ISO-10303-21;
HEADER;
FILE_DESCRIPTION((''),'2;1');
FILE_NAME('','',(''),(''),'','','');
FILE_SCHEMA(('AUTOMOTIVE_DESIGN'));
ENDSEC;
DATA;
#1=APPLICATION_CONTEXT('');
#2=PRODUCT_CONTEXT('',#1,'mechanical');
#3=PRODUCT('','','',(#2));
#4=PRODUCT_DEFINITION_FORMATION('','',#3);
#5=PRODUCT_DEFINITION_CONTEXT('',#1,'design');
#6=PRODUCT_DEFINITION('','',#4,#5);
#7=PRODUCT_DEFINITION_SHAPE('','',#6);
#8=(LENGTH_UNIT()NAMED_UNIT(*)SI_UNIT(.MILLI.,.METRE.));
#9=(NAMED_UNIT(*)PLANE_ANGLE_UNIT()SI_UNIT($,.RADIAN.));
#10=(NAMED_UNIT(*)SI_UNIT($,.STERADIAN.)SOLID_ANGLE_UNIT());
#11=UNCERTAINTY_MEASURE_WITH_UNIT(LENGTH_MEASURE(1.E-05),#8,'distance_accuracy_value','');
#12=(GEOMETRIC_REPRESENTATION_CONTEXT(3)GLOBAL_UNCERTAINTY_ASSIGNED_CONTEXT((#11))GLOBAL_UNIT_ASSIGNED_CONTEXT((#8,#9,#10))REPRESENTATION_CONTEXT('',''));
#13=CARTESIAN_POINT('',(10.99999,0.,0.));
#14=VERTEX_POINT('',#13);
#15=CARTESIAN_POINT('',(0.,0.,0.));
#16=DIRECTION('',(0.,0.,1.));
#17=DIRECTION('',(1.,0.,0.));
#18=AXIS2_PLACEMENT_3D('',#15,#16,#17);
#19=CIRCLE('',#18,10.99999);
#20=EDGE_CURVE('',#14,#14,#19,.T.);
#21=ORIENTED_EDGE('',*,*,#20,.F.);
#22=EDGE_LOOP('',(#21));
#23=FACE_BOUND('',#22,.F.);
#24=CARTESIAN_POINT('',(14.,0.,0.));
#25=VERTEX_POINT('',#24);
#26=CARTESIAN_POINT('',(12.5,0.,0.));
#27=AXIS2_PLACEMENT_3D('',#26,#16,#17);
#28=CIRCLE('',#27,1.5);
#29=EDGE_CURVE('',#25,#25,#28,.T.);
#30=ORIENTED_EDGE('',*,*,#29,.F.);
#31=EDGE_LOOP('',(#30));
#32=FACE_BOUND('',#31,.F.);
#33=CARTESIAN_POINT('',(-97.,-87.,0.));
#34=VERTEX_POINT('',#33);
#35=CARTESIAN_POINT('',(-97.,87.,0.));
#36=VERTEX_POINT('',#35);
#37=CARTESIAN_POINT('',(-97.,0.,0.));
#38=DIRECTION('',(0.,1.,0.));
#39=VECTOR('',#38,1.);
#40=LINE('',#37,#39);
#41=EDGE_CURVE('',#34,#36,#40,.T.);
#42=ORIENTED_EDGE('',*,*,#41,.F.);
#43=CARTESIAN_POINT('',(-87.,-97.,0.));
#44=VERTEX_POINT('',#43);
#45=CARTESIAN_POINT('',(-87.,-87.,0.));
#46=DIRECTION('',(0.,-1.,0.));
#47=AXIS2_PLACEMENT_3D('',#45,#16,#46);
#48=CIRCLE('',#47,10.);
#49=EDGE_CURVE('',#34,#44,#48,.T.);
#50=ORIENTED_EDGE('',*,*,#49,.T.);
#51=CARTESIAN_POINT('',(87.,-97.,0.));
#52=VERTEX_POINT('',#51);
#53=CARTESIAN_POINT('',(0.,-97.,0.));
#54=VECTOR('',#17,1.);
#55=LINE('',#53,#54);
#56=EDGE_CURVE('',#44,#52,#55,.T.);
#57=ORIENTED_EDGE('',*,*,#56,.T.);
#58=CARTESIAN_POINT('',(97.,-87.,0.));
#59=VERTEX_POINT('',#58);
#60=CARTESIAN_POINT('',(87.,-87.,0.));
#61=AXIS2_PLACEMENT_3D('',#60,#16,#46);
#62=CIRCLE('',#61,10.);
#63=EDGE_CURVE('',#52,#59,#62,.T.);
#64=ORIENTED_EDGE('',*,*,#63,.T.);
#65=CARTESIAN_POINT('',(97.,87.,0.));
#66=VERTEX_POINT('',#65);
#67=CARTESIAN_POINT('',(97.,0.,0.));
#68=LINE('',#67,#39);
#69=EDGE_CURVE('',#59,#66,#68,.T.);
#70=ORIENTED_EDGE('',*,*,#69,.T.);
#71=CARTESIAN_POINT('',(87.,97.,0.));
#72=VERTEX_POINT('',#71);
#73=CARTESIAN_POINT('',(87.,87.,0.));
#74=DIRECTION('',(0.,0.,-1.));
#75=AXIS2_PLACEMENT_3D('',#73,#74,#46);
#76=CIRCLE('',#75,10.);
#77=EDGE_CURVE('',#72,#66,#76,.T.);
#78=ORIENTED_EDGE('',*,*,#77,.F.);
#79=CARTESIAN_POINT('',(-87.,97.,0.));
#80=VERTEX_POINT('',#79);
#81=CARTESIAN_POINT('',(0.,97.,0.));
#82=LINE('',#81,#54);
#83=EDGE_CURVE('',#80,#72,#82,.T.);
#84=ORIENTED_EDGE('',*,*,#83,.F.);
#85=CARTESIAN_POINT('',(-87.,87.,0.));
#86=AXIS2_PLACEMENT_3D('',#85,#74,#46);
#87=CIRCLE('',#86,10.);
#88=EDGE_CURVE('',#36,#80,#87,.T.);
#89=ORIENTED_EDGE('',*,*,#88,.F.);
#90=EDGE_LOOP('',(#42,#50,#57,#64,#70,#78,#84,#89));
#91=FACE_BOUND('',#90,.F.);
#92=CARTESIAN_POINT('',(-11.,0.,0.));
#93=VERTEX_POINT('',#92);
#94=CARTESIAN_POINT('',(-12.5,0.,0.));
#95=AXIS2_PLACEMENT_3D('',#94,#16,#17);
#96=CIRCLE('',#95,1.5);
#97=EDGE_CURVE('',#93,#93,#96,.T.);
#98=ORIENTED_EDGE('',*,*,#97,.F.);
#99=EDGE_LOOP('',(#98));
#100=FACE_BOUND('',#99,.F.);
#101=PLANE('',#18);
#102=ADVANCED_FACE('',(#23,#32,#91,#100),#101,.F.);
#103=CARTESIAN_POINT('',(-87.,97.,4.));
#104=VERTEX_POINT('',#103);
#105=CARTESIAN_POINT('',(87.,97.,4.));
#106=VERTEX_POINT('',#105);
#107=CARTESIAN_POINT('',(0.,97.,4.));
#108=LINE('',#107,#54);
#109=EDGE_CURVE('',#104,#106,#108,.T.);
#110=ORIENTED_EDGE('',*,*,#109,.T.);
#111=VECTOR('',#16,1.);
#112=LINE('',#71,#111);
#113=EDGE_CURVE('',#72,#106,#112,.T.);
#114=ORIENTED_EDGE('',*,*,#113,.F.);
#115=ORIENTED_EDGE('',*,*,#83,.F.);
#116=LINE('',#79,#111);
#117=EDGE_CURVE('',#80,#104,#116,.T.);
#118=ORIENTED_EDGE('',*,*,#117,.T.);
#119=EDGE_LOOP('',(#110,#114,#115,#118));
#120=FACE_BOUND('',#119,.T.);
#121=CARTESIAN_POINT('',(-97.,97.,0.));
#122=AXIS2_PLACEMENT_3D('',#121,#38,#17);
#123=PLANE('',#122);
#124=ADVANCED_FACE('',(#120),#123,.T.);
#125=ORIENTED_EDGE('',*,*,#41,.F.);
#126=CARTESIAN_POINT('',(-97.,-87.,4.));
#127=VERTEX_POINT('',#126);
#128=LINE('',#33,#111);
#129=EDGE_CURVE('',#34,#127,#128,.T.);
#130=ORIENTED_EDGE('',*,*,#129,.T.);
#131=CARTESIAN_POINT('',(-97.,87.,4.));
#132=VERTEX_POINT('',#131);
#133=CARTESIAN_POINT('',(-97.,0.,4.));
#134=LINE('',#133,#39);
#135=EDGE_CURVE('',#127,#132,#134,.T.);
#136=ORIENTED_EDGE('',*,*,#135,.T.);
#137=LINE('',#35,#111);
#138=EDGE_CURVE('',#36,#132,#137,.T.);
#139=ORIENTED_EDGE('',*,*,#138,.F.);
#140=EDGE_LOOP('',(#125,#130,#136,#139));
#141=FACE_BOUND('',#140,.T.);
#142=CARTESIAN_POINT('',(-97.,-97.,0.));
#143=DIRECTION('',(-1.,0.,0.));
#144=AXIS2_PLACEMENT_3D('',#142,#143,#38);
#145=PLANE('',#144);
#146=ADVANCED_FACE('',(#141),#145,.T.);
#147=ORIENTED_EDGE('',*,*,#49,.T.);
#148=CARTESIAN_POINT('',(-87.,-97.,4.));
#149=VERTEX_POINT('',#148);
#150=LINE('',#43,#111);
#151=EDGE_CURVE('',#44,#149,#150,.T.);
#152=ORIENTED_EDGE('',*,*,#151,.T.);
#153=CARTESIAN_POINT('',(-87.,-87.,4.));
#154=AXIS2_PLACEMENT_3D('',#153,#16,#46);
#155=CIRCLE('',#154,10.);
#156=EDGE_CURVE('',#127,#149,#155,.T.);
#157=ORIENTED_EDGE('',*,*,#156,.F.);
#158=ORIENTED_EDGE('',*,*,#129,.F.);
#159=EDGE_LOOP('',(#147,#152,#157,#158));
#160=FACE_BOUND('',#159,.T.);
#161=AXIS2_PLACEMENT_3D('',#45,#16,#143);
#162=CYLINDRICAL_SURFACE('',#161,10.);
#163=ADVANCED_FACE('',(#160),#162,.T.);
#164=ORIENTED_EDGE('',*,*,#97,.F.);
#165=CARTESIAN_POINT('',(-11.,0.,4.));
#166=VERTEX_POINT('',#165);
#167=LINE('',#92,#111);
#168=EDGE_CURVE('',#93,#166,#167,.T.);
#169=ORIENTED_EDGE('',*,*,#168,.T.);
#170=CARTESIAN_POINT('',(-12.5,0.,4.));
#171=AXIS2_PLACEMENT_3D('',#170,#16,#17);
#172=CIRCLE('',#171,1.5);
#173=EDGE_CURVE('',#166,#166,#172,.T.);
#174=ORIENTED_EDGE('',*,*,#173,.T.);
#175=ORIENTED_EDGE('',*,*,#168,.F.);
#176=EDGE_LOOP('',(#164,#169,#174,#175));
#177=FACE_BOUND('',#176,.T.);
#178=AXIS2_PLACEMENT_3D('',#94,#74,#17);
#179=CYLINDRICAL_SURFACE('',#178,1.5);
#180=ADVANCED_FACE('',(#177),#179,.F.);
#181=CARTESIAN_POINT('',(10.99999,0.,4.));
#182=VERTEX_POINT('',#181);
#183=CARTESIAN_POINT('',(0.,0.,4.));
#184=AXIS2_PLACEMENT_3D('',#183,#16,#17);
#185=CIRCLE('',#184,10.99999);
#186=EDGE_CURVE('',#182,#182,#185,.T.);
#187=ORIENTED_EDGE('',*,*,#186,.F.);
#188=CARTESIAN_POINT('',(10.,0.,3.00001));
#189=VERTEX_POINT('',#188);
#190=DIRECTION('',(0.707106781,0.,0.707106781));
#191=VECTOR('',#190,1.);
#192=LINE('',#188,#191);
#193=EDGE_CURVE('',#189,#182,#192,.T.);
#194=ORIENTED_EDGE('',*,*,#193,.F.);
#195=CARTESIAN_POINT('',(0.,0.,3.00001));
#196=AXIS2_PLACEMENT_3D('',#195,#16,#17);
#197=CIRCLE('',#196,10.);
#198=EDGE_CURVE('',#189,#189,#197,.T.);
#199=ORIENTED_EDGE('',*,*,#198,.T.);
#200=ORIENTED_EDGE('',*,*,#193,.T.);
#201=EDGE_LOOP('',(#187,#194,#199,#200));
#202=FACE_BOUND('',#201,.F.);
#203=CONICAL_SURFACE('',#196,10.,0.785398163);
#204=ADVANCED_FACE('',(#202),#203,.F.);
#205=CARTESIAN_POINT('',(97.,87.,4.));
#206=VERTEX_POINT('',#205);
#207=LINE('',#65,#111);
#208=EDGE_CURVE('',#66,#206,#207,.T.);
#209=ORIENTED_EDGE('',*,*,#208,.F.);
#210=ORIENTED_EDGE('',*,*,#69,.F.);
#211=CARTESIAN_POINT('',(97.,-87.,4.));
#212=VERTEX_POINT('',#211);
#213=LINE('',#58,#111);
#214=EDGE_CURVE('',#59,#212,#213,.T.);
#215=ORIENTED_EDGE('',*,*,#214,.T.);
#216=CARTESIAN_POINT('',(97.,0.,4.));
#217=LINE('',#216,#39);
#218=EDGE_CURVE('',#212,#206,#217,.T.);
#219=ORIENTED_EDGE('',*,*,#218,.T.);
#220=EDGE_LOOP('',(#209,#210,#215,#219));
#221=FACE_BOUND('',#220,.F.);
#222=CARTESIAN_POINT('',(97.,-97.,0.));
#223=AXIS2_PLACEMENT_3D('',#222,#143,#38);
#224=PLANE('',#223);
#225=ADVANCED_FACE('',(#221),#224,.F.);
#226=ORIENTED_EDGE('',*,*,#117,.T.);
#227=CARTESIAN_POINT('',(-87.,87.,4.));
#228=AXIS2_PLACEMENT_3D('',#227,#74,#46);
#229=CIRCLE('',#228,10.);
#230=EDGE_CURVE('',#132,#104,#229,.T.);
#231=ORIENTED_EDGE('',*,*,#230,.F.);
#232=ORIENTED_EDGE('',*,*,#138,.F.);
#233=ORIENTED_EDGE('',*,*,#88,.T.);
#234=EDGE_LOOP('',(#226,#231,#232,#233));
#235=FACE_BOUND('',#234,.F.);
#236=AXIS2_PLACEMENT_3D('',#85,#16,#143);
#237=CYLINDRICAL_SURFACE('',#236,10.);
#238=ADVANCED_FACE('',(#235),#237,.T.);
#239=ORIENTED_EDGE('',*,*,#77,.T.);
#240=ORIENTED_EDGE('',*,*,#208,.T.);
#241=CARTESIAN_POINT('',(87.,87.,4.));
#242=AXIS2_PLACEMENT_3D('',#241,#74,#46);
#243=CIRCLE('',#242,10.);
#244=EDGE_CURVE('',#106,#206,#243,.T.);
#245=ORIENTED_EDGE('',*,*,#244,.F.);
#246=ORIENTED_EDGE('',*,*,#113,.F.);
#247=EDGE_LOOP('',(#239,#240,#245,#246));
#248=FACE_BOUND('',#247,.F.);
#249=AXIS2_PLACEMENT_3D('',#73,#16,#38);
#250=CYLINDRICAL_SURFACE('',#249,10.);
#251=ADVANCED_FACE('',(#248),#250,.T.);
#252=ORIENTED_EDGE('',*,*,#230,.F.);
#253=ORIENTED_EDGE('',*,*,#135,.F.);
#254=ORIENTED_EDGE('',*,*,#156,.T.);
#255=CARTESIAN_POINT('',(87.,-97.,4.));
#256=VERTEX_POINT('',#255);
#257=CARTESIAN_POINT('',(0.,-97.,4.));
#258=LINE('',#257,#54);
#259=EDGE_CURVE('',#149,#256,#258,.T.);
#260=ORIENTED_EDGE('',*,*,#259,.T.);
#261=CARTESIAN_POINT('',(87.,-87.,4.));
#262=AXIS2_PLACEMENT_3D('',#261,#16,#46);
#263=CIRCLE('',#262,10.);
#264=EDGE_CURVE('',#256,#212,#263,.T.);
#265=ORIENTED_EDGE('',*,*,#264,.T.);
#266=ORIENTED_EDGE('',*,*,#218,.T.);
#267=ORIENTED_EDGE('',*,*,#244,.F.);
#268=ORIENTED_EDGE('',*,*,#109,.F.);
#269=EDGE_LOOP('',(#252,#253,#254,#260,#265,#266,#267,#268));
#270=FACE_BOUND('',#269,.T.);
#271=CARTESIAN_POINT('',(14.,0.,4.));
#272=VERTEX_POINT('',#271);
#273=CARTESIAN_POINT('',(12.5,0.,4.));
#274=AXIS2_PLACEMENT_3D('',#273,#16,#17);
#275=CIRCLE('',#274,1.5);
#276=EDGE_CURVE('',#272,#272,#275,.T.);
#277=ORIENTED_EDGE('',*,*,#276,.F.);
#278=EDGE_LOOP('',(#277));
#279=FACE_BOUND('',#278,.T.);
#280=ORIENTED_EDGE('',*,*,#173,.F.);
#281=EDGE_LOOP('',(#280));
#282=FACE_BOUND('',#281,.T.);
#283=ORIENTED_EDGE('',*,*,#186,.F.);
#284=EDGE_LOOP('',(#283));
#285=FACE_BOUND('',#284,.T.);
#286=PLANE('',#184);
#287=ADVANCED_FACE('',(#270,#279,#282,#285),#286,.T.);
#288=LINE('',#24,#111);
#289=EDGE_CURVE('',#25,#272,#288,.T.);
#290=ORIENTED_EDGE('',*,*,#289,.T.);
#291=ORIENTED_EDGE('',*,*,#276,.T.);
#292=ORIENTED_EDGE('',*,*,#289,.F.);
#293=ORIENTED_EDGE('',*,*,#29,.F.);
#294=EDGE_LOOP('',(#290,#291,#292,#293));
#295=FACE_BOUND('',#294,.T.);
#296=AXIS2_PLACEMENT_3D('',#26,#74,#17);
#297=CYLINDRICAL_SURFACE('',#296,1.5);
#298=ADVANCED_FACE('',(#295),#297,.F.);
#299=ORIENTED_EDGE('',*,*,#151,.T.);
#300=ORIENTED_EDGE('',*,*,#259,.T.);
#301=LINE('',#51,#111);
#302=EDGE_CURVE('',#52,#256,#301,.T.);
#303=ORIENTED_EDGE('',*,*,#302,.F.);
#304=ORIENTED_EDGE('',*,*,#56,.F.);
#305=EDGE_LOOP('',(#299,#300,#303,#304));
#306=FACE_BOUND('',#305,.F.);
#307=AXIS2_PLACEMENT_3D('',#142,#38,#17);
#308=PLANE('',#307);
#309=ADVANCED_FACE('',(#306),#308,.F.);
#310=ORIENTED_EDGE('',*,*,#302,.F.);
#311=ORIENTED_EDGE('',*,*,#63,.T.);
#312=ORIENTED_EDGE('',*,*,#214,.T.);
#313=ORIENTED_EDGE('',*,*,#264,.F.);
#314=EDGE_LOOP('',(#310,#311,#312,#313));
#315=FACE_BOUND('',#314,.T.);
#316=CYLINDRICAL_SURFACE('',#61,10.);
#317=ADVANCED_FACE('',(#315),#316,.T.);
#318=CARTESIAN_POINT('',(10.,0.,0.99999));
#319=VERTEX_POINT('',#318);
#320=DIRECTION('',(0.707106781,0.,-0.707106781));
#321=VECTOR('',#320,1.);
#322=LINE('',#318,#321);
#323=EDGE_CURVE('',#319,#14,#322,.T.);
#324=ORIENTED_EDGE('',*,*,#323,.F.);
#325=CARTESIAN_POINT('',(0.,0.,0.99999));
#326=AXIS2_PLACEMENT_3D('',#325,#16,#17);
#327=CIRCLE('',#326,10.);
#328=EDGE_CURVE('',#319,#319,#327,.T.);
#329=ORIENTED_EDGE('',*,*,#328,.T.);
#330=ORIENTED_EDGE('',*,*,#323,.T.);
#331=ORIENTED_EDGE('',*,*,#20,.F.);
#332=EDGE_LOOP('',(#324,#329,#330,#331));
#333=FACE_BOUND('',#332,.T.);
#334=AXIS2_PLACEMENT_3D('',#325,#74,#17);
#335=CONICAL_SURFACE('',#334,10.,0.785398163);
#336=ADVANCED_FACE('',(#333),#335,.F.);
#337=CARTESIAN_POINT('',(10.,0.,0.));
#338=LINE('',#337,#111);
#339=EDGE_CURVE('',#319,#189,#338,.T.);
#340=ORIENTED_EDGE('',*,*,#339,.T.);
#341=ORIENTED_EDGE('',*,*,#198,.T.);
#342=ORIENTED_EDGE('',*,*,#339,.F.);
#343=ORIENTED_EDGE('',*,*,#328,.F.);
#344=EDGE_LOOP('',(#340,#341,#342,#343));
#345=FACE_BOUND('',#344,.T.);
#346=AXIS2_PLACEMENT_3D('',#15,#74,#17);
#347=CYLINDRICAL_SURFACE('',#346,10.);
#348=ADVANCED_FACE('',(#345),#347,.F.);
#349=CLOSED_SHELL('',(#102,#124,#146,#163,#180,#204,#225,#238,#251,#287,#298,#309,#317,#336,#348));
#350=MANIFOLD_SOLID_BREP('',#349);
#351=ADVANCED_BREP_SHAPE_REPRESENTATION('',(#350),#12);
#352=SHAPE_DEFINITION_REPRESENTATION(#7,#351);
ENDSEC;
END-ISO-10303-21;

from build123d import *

# Parameters (mm, degrees)
F0_W     = 194
F0_H     = 194
F0_R     = 1.5
F0_R_2   = 10
F1_DEPTH = 4
F2_SIZE  = 0.99999
F3_R     = 10


# Not quite as in the source:
# - a fillet or chamfer is up to 0.001 mm smaller than in the source, because OpenCascade refuses the exact size


with BuildPart() as f1:
    # F0 (on Top) → F1 (new body)
    with BuildSketch(Plane.XY):
        Rectangle(F0_W, F0_H)
        with Locations((-12.5, 0)):
            Circle(F0_R, mode=Mode.SUBTRACT)
        Circle(F0_R_2, mode=Mode.SUBTRACT)
        with Locations((12.5, 0)):
            Circle(F0_R, mode=Mode.SUBTRACT)
    extrude(amount=F1_DEPTH)

    # F2 (size 1 in the source; OpenCascade refuses exactly that, so slightly less here)
    f2_edges = [f1.edges().sort_by_distance(p)[0] for p in [
        (-10, 0, 4),
        (-10, 0, 0),
    ]]
    chamfer(f2_edges, length=F2_SIZE)

    # F3
    f3_edges = [f1.edges().sort_by_distance(p)[0] for p in [
        (-97, 97, 2),
        (-97, -97, 2),
        (97, -97, 2),
        (97, 97, 2),
    ]]
    fillet(f3_edges, radius=F3_R)


solid = f1.part
